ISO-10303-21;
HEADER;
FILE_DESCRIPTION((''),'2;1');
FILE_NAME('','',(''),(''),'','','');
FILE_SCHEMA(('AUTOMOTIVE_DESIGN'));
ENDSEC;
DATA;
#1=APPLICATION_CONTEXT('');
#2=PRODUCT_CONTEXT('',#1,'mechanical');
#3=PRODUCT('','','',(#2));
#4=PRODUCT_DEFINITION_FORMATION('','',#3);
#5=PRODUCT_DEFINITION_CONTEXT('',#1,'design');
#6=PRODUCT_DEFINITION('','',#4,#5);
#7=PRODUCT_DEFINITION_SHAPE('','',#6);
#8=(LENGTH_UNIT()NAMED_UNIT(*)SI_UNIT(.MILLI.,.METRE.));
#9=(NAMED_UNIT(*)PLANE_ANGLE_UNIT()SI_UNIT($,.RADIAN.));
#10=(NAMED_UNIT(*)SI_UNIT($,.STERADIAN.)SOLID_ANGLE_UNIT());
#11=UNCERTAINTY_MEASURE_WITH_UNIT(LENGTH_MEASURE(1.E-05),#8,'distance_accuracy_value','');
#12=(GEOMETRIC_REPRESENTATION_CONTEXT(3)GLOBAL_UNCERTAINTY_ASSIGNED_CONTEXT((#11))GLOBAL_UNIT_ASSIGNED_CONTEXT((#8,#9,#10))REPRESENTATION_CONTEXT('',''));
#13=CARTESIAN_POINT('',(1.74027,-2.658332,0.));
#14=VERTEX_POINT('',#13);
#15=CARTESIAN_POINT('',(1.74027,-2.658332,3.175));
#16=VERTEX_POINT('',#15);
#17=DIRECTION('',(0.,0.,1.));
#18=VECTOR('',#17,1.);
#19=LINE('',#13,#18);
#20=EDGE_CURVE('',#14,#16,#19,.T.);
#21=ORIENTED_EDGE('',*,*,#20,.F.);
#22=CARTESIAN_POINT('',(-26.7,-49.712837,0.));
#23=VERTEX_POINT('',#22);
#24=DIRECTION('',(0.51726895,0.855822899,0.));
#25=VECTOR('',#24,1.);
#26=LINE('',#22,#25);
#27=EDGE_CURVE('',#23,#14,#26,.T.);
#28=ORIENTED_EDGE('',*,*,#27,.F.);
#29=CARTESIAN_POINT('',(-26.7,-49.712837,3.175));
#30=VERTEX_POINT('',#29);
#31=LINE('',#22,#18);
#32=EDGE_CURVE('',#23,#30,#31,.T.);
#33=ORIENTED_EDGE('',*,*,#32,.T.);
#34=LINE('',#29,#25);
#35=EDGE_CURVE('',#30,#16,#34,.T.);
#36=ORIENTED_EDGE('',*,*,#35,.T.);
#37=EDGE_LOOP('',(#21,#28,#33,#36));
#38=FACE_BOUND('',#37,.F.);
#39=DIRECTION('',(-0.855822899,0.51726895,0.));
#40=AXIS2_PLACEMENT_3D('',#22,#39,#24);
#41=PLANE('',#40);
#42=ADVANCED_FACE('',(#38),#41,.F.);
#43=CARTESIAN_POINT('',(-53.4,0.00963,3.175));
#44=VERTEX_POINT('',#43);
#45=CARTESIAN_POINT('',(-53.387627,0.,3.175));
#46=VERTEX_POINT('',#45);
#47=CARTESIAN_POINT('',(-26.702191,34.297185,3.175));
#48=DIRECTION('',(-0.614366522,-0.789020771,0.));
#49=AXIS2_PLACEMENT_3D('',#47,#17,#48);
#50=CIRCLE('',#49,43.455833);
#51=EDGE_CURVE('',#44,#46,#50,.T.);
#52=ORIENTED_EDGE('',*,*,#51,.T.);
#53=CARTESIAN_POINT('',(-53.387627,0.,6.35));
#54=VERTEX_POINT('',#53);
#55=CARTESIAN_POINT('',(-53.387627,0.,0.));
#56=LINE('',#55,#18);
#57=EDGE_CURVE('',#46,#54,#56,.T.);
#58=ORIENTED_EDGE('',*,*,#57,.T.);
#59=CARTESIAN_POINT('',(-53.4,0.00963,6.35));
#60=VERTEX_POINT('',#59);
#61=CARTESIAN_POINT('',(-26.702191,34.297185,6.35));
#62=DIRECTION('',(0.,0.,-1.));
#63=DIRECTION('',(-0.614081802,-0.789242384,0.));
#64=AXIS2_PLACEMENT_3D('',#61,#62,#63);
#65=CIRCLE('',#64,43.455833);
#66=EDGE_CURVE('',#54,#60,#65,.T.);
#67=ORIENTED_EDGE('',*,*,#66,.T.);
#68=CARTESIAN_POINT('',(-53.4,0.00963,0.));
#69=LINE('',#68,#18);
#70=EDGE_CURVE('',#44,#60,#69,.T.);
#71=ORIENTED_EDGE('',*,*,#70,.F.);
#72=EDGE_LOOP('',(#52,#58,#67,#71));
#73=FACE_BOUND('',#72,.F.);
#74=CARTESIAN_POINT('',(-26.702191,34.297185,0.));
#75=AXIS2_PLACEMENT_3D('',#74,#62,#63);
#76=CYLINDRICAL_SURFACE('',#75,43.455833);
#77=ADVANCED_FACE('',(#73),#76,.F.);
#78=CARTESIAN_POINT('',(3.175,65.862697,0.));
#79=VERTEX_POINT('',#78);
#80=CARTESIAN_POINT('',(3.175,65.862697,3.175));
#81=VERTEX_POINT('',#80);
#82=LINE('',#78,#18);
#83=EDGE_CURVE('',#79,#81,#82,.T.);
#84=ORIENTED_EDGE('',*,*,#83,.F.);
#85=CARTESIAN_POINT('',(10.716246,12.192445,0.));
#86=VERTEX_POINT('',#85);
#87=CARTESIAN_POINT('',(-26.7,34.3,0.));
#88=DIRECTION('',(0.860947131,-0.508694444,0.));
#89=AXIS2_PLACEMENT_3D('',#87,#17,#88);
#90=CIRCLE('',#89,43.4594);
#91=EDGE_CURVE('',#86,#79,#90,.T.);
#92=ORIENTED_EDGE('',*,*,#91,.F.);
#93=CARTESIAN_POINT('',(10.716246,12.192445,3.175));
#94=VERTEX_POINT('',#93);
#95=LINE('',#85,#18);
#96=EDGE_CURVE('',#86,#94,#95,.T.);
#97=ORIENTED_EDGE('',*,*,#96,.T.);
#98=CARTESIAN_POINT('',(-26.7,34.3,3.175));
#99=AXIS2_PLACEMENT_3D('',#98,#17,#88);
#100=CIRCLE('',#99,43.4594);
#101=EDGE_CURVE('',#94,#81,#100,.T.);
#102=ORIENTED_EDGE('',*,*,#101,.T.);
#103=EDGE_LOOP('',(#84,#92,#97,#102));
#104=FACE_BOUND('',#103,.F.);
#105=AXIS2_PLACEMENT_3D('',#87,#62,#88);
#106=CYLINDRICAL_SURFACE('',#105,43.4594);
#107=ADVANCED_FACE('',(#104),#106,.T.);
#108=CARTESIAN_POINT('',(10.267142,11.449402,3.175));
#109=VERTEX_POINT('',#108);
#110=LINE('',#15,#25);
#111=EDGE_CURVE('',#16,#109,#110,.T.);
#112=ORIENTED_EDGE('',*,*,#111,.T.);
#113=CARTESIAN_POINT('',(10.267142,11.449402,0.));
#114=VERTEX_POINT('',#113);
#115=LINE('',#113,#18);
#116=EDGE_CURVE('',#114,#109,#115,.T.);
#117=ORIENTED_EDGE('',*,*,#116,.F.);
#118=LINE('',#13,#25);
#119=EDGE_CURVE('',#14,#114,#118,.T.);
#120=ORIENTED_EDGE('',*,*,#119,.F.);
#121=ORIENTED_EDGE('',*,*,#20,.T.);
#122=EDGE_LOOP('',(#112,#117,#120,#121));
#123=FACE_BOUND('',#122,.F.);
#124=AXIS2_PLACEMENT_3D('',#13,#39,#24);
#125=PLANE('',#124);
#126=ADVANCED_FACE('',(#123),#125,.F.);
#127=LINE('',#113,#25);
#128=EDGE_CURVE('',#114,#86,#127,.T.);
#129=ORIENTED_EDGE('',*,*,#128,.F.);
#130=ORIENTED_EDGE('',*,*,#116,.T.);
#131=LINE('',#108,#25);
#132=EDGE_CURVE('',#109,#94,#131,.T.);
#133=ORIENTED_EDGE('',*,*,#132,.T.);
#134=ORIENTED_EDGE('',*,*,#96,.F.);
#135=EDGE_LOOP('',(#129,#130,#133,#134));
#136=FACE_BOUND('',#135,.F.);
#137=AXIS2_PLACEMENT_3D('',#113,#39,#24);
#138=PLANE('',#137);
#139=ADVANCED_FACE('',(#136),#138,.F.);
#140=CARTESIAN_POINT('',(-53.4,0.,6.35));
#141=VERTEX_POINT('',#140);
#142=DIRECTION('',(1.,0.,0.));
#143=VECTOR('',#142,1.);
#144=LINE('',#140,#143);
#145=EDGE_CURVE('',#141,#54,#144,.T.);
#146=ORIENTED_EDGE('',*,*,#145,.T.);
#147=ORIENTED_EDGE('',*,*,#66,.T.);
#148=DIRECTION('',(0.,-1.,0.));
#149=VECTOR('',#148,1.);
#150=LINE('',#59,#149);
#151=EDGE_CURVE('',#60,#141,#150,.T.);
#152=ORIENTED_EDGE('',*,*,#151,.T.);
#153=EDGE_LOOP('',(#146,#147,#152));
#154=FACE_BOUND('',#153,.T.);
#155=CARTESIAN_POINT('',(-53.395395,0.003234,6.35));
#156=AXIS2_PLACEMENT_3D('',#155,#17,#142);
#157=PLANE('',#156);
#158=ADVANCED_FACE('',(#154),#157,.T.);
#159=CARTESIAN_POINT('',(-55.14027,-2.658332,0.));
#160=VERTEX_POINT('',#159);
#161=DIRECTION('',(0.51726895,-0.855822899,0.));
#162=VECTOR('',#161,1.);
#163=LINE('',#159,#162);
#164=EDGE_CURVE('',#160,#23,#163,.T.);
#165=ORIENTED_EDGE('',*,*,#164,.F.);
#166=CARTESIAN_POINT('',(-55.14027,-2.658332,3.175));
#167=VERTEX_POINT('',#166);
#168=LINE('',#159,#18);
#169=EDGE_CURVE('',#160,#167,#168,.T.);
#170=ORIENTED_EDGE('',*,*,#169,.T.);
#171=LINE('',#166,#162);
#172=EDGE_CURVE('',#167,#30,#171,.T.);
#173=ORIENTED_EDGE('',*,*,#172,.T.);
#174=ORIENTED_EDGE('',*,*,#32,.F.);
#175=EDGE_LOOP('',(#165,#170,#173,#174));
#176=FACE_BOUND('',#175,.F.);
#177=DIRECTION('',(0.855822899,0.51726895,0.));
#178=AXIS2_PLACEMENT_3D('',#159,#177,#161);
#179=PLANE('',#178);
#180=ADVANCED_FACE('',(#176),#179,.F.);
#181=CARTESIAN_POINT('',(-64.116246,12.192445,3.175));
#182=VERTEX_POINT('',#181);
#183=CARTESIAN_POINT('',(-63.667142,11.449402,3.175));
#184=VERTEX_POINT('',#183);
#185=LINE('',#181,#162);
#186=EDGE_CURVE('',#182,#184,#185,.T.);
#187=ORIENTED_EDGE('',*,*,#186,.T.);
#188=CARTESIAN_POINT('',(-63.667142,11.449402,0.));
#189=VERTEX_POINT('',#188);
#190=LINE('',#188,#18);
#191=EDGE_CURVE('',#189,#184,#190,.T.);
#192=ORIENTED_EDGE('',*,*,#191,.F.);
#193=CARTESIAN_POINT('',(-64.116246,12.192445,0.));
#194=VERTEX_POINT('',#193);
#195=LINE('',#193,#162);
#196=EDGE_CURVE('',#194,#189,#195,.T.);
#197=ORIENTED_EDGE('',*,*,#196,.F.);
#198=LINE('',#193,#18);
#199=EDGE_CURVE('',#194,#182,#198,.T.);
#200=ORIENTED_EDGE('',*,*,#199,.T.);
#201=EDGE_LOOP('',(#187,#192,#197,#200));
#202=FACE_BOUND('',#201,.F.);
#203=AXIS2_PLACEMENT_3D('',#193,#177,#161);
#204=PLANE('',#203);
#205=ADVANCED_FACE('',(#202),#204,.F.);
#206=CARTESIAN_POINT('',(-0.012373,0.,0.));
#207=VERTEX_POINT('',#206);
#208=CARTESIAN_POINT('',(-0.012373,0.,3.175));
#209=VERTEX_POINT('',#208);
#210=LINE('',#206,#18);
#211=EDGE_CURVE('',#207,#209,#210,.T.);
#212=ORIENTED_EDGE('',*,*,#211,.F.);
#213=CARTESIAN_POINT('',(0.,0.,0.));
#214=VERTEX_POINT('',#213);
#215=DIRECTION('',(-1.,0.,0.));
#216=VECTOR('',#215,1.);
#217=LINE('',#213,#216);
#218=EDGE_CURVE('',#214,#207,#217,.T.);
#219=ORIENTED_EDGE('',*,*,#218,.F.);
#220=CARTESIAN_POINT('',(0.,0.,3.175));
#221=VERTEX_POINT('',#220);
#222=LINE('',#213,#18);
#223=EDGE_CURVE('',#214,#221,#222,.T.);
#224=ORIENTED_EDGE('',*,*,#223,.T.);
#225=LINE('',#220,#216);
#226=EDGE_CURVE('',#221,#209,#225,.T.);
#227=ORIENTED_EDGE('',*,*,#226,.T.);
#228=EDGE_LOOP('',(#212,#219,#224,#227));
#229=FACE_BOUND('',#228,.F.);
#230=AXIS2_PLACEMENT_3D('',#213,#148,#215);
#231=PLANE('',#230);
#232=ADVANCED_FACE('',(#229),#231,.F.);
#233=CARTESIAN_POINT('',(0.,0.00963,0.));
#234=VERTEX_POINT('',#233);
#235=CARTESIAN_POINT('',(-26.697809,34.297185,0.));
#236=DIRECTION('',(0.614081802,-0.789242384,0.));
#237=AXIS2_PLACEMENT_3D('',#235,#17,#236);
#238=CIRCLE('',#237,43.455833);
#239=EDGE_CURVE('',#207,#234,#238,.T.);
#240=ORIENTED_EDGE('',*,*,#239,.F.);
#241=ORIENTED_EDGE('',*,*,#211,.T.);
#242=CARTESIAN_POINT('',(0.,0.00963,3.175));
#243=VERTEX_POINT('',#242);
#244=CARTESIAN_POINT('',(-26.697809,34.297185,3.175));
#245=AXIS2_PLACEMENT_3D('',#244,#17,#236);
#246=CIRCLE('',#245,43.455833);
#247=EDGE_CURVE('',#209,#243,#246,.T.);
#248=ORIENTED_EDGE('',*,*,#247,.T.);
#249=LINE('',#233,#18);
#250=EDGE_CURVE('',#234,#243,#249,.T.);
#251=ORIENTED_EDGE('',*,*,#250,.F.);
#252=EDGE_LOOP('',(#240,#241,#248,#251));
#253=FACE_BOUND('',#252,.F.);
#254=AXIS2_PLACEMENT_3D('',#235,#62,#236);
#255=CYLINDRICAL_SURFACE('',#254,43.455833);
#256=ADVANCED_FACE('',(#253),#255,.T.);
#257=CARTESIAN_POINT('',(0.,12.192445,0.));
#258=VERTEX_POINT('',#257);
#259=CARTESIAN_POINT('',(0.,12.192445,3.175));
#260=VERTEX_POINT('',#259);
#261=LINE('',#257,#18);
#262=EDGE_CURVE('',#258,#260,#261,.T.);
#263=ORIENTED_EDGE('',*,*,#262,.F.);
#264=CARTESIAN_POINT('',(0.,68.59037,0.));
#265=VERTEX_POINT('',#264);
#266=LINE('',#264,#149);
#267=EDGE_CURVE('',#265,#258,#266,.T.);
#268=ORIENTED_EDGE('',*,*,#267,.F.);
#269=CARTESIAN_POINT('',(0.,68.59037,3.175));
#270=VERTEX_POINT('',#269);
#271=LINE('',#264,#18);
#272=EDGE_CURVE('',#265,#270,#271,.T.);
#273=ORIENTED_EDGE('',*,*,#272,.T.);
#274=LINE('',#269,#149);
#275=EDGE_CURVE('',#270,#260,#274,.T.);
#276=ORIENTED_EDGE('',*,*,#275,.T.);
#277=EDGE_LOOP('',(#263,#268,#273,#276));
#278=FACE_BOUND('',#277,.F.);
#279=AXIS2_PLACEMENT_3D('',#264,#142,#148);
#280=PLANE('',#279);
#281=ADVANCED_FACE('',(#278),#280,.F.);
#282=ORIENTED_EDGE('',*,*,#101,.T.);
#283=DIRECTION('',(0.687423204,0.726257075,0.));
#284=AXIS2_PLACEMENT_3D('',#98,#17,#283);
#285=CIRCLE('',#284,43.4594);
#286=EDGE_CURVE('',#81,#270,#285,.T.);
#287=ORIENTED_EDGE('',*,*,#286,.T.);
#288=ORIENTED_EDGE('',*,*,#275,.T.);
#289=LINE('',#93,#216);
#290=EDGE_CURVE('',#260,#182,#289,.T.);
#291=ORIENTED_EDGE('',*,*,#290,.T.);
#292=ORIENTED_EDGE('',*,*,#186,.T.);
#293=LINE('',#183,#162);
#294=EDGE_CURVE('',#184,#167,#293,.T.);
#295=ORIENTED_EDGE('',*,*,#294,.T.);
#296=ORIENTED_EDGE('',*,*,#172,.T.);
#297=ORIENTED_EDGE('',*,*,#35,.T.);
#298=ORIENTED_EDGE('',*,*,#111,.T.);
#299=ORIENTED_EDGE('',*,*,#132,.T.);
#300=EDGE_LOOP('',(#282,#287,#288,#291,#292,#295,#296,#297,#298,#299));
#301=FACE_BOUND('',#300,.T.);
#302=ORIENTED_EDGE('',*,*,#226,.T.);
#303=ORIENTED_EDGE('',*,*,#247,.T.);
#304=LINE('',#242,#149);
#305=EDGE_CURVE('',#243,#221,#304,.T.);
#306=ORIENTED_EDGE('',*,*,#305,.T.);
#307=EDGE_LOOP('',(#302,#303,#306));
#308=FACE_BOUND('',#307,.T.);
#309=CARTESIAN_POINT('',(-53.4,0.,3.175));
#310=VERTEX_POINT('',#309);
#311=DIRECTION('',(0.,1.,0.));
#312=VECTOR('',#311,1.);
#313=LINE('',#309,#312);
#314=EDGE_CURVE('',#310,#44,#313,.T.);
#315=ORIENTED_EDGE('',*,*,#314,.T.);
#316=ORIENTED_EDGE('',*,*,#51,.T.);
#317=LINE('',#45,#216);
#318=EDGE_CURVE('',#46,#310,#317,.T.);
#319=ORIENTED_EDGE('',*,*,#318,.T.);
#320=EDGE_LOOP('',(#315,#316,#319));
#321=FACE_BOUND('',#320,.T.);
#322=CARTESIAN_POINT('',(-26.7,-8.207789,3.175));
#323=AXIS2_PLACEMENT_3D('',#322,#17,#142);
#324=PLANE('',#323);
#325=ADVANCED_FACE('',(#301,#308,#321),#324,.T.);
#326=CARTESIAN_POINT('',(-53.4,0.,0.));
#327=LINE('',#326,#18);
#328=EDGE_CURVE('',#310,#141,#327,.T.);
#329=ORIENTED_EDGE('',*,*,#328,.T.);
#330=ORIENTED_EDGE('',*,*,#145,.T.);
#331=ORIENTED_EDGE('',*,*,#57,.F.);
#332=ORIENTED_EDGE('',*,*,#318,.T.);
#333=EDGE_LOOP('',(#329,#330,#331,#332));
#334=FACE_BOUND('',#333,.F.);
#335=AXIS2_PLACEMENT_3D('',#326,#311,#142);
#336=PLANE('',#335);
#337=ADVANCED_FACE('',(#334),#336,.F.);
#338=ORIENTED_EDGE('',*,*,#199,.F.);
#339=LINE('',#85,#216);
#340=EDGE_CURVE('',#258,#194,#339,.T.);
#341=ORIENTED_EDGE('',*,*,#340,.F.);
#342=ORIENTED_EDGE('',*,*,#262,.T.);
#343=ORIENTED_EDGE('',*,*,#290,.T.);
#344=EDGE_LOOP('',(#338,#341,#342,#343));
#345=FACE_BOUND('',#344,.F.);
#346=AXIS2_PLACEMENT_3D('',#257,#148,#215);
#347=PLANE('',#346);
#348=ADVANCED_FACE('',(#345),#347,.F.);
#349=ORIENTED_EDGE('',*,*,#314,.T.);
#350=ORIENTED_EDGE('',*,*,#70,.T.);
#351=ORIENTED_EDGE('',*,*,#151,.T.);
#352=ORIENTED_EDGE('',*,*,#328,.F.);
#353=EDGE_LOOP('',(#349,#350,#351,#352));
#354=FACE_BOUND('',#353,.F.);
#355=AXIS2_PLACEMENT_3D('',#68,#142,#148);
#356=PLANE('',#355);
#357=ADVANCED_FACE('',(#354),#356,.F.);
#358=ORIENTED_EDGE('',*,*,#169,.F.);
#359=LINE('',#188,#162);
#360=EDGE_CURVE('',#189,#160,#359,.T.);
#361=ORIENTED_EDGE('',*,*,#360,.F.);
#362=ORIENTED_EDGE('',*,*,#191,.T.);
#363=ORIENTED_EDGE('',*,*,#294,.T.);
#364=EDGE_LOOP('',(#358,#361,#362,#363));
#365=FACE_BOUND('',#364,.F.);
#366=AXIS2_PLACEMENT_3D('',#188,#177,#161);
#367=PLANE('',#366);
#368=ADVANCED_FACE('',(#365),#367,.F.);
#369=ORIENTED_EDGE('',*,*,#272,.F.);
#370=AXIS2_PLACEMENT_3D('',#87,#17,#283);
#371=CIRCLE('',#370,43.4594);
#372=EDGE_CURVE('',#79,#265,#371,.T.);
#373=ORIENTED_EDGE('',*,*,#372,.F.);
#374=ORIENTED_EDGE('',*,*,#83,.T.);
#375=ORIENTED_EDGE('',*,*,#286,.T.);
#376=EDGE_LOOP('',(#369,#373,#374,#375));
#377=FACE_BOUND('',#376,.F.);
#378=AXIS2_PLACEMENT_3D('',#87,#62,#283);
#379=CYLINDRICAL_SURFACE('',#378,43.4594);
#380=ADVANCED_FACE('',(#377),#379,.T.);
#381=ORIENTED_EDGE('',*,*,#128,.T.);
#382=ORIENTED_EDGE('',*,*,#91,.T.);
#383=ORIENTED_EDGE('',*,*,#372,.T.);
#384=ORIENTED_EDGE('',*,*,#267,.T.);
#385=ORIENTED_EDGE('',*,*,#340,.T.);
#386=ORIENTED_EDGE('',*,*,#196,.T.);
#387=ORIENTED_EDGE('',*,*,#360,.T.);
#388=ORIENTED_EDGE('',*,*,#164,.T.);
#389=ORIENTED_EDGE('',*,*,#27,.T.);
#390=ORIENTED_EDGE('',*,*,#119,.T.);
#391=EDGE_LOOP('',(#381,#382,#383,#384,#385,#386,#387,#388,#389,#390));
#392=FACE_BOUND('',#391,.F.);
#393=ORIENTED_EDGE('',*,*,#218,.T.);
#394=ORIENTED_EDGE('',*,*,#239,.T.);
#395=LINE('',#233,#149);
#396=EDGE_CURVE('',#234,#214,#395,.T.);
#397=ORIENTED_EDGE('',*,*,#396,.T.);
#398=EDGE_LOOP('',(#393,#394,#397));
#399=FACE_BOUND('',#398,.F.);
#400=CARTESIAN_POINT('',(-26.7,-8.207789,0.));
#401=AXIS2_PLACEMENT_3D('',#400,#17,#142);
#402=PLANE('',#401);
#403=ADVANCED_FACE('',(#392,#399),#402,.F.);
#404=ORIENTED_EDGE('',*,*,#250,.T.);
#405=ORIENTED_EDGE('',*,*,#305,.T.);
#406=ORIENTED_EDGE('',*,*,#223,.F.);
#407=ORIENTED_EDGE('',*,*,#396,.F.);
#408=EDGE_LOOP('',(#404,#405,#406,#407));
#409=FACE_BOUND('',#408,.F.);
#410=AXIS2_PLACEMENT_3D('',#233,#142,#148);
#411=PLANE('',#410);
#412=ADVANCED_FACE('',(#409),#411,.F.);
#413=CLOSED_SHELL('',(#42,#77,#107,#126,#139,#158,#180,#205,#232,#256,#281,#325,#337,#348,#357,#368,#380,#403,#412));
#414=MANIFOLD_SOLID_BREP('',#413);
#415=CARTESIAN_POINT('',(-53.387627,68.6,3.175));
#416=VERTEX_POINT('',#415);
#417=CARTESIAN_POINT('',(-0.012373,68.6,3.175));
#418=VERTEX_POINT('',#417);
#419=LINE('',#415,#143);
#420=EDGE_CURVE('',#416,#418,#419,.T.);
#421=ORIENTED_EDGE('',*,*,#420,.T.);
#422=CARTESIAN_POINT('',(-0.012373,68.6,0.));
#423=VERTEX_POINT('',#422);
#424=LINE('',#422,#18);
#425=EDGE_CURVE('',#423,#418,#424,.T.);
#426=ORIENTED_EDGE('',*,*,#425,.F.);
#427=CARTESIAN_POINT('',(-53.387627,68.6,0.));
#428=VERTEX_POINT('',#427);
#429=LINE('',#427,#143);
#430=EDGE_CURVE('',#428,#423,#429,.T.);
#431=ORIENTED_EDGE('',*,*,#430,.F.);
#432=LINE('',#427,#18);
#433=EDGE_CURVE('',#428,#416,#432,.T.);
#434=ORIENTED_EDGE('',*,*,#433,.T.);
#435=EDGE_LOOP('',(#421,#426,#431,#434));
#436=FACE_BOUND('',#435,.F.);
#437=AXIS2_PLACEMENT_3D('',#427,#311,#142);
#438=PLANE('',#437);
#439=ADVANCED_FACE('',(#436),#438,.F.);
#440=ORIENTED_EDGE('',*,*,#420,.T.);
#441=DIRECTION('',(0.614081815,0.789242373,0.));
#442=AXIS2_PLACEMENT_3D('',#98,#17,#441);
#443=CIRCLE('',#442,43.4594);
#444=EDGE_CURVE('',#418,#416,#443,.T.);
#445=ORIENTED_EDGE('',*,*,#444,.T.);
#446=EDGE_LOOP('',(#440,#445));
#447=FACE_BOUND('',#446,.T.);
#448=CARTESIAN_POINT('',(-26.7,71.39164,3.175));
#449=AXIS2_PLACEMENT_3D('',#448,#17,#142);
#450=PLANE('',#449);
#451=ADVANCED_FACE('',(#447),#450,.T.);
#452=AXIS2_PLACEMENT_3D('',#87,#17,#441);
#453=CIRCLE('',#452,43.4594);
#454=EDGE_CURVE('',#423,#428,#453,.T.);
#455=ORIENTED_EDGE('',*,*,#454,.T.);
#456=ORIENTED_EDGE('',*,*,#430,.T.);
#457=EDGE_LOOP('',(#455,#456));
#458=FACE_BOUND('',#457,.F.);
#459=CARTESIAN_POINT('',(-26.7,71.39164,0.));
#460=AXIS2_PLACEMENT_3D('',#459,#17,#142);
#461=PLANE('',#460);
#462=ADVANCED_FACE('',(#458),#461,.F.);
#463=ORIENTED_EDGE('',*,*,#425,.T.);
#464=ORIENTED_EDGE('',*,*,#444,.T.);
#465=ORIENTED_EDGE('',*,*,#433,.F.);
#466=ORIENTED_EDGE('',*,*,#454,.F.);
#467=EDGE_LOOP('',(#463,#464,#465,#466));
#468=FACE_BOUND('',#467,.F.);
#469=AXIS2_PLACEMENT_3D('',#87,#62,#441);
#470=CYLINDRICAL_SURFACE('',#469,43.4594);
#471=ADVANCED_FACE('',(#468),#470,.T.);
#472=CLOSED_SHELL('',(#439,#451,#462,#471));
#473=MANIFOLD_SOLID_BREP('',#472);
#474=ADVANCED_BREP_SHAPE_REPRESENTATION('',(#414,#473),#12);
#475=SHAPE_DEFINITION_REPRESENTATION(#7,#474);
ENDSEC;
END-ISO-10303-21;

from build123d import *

# Parameters (mm, degrees)
F1_DEPTH = 3.175
F2_DEPTH = 6.35


# Not quite as in the source:
# - a feature names something its author has since deleted; it is built from what else it names


with BuildPart() as f1:
    # F0 (on Top) → F1 (new body)
    with BuildSketch(Plane.XY):
        with BuildLine():
            ThreePointArc((-0.0123727477, 68.6), (-26.7, 77.7594), (-53.3876272523, 68.6))
            Line((-53.3876272523, 68.6), (-0.0123727477, 68.6))
        make_face()
    extrude(amount=F1_DEPTH)


with BuildPart() as f1b:
    # F0 (on Top) → F1, piece 2 (new body)
    with BuildSketch(Plane.XY):
        Polygon((0, 12.1924446831), (-53.4, 12.1924446831), (-64.1162457533, 12.1924446831), (-63.6671424385, 11.4494020146), (-55.1402698288, -2.6583321515), (-26.7, -49.7128367424), (1.7402698288, -2.6583321515), (10.2671424385, 11.4494020146), (10.7162457533, 12.1924446831), (3.175, 12.1924446831), align=None)
        with BuildLine():
            Line((-53.4, 0), (-53.4, 0.0096303846))
            ThreePointArc((-53.4, 0.0096303846), (-53.3938140605, 0.0048146343), (-53.3876272523, 0))
            Line((-53.3876272523, 0), (-53.4, 0))
        make_face(mode=Mode.SUBTRACT)
        with BuildLine():
            ThreePointArc((-0.0123727477, 0), (-0.0061859395, 0.0048146343), (0, 0.0096303846))
            Line((0, 0.0096303846), (0, 0))
            Line((0, 0), (-0.0123727477, 0))
        make_face(mode=Mode.SUBTRACT)
        with BuildLine():
            ThreePointArc((3.175, 65.8626967061), (1.6203585098, 67.2647803305), (0, 68.5903696154))
            Line((0, 68.5903696154), (0, 12.1924446831))
            Line((0, 12.1924446831), (3.175, 12.1924446831))
            Line((3.175, 12.1924446831), (3.175, 65.8626967061))
        make_face()
        with BuildLine():
            ThreePointArc((10.7162457533, 12.1924446831), (16.3366347059, 40.3471085281), (3.175, 65.8626967061))
            Line((3.175, 65.8626967061), (3.175, 12.1924446831))
            Line((3.175, 12.1924446831), (10.7162457533, 12.1924446831))
        make_face()
    extrude(amount=F1_DEPTH)

    # F0 (on Top) → F2 (join)
    with BuildSketch(Plane.XY):
        with BuildLine():
            ThreePointArc((-53.3876272523, 0), (-53.3938140605, 0.0048146343), (-53.4, 0.0096303846))
            Line((-53.4, 0.0096303846), (-53.4, 0))
            Line((-53.4, 0), (-53.3876272523, 0))
        make_face()
    extrude(amount=F2_DEPTH)


solid = Compound([f1.part, f1b.part])
